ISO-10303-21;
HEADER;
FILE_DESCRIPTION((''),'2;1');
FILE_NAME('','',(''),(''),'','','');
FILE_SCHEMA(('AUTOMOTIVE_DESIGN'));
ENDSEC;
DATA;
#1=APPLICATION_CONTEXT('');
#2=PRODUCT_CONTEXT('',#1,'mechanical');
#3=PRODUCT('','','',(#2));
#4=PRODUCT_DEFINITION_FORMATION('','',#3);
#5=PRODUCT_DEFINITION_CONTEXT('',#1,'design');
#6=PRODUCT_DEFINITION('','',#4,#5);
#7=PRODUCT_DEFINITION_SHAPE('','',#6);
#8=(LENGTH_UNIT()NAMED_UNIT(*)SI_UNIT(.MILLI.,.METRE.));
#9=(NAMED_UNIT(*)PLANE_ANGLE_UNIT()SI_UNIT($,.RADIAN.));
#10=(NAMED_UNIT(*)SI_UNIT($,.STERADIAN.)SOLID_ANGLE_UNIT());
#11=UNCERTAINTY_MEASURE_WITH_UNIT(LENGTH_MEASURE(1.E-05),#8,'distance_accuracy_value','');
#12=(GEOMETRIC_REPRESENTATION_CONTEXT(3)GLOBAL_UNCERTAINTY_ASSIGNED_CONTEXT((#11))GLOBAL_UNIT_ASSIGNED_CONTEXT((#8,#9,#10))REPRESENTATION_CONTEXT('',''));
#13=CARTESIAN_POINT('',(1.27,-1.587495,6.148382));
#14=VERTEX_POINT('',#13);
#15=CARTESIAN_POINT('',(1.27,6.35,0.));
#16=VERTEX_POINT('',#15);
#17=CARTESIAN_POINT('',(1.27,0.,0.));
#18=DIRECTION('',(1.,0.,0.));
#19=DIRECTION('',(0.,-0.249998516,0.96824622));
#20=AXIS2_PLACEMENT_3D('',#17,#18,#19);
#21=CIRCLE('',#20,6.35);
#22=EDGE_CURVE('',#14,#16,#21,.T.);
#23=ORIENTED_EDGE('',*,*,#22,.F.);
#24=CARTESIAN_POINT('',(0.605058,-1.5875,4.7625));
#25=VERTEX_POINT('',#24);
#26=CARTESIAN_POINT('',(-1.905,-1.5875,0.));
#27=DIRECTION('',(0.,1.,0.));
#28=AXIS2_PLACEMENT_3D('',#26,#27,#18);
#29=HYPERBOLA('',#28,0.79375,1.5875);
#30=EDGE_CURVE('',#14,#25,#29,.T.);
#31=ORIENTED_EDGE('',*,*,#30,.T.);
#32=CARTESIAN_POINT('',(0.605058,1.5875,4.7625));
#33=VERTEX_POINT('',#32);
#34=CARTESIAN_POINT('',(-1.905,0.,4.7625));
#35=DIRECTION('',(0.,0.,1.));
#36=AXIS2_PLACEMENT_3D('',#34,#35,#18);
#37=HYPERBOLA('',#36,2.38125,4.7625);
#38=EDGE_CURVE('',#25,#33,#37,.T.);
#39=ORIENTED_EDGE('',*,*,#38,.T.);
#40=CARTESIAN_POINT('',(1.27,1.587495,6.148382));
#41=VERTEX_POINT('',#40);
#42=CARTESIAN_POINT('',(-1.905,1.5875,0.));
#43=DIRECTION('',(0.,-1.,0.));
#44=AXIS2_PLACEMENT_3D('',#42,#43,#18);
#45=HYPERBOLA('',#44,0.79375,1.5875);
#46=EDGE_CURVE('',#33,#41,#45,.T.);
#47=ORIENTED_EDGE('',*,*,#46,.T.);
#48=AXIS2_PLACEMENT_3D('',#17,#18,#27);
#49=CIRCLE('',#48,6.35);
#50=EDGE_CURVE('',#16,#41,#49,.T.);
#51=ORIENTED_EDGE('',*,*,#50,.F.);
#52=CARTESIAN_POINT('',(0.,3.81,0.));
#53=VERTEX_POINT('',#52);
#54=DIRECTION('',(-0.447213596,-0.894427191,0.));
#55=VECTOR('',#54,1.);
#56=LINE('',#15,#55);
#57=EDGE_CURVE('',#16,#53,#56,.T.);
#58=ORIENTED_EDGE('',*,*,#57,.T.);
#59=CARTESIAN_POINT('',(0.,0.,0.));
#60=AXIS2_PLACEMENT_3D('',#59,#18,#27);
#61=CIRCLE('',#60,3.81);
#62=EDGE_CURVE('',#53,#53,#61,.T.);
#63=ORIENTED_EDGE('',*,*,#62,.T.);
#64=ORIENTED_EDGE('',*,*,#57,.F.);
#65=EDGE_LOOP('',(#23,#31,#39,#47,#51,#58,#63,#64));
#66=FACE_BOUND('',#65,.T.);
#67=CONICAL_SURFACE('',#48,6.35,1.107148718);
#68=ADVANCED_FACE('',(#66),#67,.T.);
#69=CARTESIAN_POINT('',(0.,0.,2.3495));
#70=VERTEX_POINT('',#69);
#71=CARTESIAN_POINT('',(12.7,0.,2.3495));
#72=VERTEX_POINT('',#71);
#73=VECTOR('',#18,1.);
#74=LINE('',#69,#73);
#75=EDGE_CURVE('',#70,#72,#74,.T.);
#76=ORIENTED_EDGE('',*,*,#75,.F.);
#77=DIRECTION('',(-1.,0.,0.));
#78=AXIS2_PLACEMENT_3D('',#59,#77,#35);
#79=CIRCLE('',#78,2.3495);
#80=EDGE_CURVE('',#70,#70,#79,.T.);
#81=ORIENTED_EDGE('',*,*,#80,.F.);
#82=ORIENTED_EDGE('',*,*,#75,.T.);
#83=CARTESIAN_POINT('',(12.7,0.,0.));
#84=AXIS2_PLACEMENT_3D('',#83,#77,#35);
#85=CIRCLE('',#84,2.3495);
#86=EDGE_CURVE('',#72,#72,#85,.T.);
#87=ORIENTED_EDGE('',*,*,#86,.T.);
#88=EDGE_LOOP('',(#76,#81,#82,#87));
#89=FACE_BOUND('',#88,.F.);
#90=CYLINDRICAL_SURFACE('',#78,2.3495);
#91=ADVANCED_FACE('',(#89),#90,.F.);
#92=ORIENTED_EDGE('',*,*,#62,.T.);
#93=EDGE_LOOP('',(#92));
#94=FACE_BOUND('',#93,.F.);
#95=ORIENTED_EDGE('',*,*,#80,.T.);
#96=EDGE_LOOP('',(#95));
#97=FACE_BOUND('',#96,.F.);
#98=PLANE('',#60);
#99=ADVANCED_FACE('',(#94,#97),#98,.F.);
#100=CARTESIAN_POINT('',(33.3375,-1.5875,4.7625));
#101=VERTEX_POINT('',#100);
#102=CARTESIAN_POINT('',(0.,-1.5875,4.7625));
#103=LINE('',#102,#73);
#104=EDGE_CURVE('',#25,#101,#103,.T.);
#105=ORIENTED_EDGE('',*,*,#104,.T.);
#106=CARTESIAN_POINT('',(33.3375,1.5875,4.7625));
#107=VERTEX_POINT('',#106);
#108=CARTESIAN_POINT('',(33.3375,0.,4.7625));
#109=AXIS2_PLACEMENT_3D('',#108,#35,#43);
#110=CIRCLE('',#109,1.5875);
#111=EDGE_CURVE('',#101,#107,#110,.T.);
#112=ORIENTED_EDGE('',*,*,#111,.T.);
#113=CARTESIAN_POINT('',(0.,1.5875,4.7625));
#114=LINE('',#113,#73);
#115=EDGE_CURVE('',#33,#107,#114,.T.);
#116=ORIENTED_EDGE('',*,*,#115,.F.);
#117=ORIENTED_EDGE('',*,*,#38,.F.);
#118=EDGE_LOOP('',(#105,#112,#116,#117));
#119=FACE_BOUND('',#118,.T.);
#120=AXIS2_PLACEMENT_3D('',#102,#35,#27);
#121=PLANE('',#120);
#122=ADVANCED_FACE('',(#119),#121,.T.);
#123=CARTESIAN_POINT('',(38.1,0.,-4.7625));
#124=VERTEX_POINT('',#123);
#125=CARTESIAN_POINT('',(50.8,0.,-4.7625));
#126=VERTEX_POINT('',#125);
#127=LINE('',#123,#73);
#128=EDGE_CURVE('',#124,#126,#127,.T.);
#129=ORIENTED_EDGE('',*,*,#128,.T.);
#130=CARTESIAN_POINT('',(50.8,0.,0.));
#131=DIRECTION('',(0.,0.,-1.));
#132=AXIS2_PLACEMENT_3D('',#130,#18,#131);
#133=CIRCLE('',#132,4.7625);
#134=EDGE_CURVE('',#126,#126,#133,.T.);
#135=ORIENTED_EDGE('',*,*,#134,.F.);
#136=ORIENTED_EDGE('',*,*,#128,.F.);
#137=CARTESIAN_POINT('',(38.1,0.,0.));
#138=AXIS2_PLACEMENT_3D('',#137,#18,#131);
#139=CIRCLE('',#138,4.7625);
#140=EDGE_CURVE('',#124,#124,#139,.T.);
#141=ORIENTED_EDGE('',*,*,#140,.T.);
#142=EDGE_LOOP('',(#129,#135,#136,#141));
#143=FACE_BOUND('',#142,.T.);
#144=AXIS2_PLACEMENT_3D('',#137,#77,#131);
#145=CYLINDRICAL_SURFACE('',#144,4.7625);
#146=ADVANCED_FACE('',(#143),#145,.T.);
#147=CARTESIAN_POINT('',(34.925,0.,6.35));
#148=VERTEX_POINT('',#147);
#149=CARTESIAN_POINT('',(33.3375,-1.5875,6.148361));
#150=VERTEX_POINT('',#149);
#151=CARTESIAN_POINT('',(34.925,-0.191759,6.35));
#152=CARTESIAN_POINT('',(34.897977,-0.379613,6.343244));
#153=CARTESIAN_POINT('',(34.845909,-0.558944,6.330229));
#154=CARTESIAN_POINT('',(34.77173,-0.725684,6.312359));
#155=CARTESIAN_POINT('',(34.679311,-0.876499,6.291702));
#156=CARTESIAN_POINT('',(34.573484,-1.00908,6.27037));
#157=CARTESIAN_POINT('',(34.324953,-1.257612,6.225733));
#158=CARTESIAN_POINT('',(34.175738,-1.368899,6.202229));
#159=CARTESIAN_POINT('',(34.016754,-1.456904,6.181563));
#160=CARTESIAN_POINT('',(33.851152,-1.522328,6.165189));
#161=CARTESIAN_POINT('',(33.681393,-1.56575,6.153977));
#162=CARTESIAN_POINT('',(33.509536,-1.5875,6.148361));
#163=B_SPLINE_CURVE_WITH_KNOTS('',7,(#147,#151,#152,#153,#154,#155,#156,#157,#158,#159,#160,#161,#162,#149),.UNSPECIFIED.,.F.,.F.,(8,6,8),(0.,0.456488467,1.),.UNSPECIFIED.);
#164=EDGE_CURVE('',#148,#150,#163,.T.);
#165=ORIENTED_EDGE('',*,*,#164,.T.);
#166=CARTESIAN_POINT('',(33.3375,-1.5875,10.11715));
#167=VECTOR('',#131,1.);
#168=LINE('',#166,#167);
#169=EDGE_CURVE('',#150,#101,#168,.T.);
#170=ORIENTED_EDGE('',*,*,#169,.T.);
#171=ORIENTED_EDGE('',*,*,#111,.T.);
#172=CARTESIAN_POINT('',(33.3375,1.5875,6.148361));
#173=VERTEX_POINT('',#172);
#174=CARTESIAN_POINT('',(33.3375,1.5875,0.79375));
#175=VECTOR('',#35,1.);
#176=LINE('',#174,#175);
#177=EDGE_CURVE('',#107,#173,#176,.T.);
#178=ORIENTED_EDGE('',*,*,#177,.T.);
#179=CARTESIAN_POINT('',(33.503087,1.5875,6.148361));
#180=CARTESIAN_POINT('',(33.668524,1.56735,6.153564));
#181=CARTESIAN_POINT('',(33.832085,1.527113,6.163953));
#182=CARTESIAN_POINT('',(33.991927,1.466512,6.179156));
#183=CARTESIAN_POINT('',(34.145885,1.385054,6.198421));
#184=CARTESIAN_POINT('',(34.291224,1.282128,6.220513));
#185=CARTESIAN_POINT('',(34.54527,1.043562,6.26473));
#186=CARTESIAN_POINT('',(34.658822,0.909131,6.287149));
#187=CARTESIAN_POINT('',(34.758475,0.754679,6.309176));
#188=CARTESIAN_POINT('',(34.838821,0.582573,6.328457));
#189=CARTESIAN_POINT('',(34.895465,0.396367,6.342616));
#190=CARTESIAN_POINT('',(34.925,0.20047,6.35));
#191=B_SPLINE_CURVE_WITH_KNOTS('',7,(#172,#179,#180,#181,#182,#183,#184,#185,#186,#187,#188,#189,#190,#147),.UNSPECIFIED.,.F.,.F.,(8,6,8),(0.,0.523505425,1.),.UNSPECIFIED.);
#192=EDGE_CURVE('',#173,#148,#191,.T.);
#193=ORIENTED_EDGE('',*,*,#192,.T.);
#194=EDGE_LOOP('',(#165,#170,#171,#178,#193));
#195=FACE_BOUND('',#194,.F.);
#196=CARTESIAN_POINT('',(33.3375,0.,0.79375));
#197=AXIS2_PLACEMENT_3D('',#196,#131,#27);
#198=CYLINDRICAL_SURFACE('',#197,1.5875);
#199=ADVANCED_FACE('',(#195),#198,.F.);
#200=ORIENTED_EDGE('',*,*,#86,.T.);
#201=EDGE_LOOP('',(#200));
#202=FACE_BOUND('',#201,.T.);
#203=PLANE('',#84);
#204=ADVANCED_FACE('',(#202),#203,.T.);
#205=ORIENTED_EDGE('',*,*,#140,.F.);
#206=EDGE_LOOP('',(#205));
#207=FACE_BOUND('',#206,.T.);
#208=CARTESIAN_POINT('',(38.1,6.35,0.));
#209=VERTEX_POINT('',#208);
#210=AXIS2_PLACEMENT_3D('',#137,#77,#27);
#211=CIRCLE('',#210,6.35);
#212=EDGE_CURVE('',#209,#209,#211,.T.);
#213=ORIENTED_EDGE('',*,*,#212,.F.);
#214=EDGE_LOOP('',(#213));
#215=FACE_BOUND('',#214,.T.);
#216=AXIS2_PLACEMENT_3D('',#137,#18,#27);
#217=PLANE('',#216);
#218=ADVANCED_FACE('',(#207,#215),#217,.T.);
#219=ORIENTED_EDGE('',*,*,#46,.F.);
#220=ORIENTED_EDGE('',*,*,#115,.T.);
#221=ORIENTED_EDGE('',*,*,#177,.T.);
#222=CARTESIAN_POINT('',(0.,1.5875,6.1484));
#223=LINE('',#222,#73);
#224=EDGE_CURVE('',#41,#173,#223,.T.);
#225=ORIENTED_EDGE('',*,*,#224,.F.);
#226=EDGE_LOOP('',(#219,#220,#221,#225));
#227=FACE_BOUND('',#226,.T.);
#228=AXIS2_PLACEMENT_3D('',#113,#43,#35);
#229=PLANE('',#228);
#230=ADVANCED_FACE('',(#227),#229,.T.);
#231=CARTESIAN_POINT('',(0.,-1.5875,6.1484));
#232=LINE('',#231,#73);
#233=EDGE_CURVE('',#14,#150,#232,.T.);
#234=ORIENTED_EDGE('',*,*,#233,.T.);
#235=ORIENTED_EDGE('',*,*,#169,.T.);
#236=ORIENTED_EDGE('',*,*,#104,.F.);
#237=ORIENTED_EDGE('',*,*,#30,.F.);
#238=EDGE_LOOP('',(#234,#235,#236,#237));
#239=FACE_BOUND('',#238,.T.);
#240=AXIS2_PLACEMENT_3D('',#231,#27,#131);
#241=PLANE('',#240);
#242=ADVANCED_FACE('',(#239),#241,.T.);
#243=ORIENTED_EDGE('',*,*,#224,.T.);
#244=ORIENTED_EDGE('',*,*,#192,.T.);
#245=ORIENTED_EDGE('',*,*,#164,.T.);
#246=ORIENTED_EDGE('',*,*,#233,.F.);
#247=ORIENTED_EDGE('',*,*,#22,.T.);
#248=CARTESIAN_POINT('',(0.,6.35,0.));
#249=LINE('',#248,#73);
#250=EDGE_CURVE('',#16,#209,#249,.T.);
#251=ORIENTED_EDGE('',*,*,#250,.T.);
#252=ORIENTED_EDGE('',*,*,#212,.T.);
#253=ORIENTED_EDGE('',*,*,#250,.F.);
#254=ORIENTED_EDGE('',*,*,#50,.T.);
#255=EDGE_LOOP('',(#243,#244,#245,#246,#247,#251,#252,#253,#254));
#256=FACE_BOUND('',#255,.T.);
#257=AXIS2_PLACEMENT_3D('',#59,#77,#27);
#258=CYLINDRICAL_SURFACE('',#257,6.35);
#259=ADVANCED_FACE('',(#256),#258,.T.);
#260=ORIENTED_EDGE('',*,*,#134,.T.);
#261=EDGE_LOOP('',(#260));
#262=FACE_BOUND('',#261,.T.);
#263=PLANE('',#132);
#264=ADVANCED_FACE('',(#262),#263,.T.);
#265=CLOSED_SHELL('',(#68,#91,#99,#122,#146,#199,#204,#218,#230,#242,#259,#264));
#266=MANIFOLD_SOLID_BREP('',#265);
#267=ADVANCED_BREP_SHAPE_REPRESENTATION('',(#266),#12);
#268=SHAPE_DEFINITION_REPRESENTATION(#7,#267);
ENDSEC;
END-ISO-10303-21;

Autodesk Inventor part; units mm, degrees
ref_plane "YZ Plane" through (0, 0, 0) normal (1, 0, 0) x (0, 1, 0)
ref_plane "XZ Plane" through (0, 0, 0) normal (0, 1, 0) x (-1, 0, 0)
ref_plane "XY Plane" through (0, 0, 0) normal (0, 0, 1) x (1, 0, 0)
sketch "Sketch1" plane through (0, 0, 0) normal (1, 0, 0) x (0, 1, 0)
  circle A0 centre (0, 0) radius 6.35
  line L0 (0, 0) -> (0, 6.35) construction
  line L1 (-1.5875, 6.1484) -> (-1.5875, 4.7625)
  line L2 (-1.5875, 4.7625) -> (1.5875, 4.7625)
  line L3 (1.5875, 4.7625) -> (1.5875, 6.1484)
  point P0 (0, 4.7625)
  dimension "d0" = 12.7
  dimension "d2" = 1.5875
  dimension "d3" = 3.175
extrude "Extrusion1" add sketch "Sketch1" along normal blind 38.1
sketch "Sketch2" plane through (38.1, 0, 0) normal (1, 0, 0) x (0, 0, -1)
  circle A0 centre (0, 0) radius 6.35 projected
  circle A1 centre (0, 0) radius 4.7625
  dimension "d6" = 9.525
extrude "Extrusion2" add sketch "Sketch2" along normal blind 12.7 contours A1
extrude "Extrusion3" cut sketch "Sketch1" along normal blind 34.925 contours L3 L2 L1 A0 picked at (0.1781, 5.2842)
fillet "Fillet1" radius 1.5875 2 edges at (34.925, 1.5875, 5.4554) (34.925, -1.5875, 5.4554)
chamfer "Chamfer1" distance 1.27 distance2 2.54 1 edges at (0, 0, -6.35) measured on face at (25.4, -3.3725, 5.3804)
sketch "Sketch3" plane through (0, 0, 0) normal (-1, 0, 0) x (0, 0, 1)
  circle A0 centre (0, 0) radius 3.81 projected
  circle A1 centre (0, 0) radius 2.3495
  dimension "d16" = 4.699
extrude "Extrusion4" cut sketch "Sketch3" against normal blind 12.7 contours A1
thread "Thread1" size "10-32 UNF" class "2B" standard "ANSI Unified Screw Threads" full length
properties part number "Banebots 0.5x1.5 P60 Shaft" material "Steel, Carbon"
